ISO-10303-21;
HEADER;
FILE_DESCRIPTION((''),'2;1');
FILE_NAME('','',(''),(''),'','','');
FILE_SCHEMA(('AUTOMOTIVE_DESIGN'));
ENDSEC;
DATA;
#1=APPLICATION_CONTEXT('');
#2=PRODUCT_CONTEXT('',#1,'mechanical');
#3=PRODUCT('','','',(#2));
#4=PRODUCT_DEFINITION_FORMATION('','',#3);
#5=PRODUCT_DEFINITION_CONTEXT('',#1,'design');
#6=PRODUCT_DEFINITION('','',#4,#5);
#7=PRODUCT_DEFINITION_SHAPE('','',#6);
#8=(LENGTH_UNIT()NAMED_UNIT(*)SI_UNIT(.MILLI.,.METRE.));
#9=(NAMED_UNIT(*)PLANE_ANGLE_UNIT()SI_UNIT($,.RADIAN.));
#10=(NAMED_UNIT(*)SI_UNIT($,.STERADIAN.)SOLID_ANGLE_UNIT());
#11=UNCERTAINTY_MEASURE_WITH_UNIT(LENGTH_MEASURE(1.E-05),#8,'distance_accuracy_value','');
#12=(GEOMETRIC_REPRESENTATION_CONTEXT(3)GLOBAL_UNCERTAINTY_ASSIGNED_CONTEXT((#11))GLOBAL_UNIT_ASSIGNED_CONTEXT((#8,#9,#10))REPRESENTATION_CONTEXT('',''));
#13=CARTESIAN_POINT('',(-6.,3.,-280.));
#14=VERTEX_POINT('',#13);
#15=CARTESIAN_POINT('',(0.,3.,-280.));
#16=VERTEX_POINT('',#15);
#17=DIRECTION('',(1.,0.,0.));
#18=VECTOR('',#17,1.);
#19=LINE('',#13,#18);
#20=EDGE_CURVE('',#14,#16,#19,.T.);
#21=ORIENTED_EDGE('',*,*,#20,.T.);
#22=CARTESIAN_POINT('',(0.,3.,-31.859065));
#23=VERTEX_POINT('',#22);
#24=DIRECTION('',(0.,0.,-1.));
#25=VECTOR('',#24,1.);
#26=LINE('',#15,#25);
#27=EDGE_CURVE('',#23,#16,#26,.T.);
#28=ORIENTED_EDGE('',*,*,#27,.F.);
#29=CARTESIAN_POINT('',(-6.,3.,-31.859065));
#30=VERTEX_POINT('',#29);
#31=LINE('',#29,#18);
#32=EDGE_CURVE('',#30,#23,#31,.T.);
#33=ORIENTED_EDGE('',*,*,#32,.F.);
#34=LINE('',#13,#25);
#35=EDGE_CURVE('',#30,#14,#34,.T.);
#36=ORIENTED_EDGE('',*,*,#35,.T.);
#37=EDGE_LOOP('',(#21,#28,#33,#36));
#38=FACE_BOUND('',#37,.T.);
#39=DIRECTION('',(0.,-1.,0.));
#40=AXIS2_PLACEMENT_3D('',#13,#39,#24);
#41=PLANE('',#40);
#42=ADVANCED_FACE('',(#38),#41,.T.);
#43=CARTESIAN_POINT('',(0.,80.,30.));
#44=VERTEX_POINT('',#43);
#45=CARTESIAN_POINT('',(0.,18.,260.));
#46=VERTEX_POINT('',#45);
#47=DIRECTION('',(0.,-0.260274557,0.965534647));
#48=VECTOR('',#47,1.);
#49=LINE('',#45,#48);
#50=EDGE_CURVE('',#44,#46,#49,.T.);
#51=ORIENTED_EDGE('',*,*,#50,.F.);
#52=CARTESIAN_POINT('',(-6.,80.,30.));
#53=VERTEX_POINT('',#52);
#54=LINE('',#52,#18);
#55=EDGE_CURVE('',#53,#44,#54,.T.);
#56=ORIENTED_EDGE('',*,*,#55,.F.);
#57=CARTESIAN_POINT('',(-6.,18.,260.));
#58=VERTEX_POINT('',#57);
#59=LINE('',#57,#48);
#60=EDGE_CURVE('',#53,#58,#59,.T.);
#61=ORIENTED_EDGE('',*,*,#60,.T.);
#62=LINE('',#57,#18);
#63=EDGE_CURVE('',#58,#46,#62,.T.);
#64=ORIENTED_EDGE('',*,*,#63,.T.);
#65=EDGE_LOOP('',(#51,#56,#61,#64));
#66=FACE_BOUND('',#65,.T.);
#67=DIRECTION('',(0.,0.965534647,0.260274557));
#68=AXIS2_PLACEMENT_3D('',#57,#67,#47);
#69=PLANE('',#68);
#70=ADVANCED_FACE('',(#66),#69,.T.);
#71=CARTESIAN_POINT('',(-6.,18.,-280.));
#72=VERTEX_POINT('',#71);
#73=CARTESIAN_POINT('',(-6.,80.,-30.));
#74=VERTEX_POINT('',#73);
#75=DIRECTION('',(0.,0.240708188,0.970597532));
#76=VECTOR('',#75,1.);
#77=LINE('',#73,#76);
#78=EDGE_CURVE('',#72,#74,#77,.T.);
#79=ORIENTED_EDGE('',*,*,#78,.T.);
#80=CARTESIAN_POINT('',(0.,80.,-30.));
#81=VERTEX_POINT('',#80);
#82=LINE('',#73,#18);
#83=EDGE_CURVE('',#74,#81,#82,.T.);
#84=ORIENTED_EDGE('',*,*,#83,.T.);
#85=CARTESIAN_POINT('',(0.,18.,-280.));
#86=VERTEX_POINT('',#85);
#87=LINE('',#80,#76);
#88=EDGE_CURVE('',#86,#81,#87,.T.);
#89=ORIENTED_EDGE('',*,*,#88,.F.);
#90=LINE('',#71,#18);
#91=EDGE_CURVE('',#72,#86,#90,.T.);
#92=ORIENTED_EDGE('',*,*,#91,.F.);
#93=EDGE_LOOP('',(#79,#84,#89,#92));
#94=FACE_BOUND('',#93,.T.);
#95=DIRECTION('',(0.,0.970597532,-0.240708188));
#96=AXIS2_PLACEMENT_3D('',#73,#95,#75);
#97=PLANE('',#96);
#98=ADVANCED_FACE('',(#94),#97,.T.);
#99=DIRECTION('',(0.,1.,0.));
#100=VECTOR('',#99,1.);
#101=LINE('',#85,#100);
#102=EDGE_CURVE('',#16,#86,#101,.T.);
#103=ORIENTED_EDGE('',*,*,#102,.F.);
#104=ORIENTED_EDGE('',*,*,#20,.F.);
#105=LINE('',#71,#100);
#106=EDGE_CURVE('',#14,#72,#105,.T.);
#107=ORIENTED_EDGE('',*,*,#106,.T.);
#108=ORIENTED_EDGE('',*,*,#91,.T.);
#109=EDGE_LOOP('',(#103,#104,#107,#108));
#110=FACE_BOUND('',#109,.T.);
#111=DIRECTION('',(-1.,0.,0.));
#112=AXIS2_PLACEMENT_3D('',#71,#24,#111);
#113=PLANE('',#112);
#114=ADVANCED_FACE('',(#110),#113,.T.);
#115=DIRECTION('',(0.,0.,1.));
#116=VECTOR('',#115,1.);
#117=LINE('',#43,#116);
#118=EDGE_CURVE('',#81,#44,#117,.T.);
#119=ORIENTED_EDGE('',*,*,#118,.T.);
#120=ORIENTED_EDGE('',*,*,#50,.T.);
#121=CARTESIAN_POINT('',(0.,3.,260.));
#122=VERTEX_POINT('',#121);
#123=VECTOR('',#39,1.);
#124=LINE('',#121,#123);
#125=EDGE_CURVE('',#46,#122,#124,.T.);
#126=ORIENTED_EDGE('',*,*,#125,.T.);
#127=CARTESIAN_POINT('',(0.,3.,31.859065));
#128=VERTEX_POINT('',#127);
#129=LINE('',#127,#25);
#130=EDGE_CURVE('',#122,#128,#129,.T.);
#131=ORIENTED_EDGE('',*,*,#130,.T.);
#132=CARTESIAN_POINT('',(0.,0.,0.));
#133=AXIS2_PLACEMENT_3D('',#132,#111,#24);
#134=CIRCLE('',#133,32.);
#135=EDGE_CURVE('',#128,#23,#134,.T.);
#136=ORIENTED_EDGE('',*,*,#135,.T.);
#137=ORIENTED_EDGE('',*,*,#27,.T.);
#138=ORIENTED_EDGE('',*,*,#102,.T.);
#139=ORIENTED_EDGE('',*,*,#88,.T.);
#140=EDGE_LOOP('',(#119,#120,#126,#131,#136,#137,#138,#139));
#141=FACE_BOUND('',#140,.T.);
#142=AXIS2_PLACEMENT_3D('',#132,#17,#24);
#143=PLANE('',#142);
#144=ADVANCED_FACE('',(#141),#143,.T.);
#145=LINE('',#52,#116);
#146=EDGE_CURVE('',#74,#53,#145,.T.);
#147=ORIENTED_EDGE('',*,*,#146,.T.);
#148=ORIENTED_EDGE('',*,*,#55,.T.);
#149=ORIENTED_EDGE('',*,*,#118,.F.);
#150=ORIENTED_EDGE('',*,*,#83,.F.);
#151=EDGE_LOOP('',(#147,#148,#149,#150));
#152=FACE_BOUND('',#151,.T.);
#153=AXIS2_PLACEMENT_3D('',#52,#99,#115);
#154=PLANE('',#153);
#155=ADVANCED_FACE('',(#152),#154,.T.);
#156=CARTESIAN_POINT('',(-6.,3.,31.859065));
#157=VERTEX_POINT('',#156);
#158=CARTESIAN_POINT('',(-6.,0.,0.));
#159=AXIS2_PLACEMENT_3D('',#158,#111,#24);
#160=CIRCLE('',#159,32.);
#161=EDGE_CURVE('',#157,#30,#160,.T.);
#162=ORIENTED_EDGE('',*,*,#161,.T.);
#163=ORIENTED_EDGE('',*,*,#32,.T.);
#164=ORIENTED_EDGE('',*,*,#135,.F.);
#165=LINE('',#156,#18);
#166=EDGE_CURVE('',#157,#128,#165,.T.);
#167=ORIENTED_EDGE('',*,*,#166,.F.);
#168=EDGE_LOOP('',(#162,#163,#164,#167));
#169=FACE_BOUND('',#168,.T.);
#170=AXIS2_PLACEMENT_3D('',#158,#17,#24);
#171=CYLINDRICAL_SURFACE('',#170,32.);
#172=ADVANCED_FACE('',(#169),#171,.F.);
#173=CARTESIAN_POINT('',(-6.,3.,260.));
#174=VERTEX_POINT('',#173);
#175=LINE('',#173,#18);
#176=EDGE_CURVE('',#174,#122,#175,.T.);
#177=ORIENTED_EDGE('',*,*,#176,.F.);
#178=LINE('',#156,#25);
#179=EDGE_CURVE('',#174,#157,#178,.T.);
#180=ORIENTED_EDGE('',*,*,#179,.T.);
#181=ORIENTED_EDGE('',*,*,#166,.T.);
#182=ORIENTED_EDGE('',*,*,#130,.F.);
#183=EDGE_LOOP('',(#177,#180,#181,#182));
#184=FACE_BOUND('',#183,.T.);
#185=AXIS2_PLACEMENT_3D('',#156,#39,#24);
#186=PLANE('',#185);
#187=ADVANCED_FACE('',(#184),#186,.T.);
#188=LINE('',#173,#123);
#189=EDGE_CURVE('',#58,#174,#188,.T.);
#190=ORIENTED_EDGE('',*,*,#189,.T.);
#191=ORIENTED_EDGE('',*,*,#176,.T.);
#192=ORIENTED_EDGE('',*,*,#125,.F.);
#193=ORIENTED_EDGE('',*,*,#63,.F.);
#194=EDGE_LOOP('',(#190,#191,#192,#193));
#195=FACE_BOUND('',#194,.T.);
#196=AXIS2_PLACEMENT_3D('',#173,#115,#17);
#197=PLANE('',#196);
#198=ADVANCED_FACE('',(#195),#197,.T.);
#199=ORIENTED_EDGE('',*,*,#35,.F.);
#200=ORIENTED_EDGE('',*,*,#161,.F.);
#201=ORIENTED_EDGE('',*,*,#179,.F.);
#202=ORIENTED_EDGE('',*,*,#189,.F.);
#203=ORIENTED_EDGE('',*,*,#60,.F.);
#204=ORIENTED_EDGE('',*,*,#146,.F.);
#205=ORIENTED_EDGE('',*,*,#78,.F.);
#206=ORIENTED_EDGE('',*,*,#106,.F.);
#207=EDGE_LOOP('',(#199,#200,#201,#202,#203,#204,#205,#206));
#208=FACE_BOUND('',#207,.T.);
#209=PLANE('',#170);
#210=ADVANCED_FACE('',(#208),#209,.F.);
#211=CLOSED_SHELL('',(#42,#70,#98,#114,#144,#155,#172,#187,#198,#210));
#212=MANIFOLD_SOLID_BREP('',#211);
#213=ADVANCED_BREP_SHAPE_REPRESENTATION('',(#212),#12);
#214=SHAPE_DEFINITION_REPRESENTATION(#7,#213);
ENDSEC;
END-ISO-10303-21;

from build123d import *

# Parameters (mm, degrees)
BASE_FLANGE1_DEPTH = 6


# Sheet-metal steps are written as plain solids
with BuildPart() as part:
    # Sketch1 → Base-Flange1 (new body)
    with BuildSketch(Plane(origin=(0, 0, 0), x_dir=(0, 0, -1), z_dir=(1, 0, 0))):
        with BuildLine():
            Line((-31.859064644, 3), (-260, 3))
            Line((-260, 3), (-260, 18))
            Line((-260, 18), (-30, 80))
            Line((-30, 80), (30, 80))
            Line((30, 80), (280, 18))
            Line((280, 18), (280, 3))
            Line((280, 3), (31.859064644, 3))
            ThreePointArc((31.859064644, 3), (0, 32), (-31.859064644, 3))
        make_face()
    extrude(amount=-BASE_FLANGE1_DEPTH)


solid = part.part
